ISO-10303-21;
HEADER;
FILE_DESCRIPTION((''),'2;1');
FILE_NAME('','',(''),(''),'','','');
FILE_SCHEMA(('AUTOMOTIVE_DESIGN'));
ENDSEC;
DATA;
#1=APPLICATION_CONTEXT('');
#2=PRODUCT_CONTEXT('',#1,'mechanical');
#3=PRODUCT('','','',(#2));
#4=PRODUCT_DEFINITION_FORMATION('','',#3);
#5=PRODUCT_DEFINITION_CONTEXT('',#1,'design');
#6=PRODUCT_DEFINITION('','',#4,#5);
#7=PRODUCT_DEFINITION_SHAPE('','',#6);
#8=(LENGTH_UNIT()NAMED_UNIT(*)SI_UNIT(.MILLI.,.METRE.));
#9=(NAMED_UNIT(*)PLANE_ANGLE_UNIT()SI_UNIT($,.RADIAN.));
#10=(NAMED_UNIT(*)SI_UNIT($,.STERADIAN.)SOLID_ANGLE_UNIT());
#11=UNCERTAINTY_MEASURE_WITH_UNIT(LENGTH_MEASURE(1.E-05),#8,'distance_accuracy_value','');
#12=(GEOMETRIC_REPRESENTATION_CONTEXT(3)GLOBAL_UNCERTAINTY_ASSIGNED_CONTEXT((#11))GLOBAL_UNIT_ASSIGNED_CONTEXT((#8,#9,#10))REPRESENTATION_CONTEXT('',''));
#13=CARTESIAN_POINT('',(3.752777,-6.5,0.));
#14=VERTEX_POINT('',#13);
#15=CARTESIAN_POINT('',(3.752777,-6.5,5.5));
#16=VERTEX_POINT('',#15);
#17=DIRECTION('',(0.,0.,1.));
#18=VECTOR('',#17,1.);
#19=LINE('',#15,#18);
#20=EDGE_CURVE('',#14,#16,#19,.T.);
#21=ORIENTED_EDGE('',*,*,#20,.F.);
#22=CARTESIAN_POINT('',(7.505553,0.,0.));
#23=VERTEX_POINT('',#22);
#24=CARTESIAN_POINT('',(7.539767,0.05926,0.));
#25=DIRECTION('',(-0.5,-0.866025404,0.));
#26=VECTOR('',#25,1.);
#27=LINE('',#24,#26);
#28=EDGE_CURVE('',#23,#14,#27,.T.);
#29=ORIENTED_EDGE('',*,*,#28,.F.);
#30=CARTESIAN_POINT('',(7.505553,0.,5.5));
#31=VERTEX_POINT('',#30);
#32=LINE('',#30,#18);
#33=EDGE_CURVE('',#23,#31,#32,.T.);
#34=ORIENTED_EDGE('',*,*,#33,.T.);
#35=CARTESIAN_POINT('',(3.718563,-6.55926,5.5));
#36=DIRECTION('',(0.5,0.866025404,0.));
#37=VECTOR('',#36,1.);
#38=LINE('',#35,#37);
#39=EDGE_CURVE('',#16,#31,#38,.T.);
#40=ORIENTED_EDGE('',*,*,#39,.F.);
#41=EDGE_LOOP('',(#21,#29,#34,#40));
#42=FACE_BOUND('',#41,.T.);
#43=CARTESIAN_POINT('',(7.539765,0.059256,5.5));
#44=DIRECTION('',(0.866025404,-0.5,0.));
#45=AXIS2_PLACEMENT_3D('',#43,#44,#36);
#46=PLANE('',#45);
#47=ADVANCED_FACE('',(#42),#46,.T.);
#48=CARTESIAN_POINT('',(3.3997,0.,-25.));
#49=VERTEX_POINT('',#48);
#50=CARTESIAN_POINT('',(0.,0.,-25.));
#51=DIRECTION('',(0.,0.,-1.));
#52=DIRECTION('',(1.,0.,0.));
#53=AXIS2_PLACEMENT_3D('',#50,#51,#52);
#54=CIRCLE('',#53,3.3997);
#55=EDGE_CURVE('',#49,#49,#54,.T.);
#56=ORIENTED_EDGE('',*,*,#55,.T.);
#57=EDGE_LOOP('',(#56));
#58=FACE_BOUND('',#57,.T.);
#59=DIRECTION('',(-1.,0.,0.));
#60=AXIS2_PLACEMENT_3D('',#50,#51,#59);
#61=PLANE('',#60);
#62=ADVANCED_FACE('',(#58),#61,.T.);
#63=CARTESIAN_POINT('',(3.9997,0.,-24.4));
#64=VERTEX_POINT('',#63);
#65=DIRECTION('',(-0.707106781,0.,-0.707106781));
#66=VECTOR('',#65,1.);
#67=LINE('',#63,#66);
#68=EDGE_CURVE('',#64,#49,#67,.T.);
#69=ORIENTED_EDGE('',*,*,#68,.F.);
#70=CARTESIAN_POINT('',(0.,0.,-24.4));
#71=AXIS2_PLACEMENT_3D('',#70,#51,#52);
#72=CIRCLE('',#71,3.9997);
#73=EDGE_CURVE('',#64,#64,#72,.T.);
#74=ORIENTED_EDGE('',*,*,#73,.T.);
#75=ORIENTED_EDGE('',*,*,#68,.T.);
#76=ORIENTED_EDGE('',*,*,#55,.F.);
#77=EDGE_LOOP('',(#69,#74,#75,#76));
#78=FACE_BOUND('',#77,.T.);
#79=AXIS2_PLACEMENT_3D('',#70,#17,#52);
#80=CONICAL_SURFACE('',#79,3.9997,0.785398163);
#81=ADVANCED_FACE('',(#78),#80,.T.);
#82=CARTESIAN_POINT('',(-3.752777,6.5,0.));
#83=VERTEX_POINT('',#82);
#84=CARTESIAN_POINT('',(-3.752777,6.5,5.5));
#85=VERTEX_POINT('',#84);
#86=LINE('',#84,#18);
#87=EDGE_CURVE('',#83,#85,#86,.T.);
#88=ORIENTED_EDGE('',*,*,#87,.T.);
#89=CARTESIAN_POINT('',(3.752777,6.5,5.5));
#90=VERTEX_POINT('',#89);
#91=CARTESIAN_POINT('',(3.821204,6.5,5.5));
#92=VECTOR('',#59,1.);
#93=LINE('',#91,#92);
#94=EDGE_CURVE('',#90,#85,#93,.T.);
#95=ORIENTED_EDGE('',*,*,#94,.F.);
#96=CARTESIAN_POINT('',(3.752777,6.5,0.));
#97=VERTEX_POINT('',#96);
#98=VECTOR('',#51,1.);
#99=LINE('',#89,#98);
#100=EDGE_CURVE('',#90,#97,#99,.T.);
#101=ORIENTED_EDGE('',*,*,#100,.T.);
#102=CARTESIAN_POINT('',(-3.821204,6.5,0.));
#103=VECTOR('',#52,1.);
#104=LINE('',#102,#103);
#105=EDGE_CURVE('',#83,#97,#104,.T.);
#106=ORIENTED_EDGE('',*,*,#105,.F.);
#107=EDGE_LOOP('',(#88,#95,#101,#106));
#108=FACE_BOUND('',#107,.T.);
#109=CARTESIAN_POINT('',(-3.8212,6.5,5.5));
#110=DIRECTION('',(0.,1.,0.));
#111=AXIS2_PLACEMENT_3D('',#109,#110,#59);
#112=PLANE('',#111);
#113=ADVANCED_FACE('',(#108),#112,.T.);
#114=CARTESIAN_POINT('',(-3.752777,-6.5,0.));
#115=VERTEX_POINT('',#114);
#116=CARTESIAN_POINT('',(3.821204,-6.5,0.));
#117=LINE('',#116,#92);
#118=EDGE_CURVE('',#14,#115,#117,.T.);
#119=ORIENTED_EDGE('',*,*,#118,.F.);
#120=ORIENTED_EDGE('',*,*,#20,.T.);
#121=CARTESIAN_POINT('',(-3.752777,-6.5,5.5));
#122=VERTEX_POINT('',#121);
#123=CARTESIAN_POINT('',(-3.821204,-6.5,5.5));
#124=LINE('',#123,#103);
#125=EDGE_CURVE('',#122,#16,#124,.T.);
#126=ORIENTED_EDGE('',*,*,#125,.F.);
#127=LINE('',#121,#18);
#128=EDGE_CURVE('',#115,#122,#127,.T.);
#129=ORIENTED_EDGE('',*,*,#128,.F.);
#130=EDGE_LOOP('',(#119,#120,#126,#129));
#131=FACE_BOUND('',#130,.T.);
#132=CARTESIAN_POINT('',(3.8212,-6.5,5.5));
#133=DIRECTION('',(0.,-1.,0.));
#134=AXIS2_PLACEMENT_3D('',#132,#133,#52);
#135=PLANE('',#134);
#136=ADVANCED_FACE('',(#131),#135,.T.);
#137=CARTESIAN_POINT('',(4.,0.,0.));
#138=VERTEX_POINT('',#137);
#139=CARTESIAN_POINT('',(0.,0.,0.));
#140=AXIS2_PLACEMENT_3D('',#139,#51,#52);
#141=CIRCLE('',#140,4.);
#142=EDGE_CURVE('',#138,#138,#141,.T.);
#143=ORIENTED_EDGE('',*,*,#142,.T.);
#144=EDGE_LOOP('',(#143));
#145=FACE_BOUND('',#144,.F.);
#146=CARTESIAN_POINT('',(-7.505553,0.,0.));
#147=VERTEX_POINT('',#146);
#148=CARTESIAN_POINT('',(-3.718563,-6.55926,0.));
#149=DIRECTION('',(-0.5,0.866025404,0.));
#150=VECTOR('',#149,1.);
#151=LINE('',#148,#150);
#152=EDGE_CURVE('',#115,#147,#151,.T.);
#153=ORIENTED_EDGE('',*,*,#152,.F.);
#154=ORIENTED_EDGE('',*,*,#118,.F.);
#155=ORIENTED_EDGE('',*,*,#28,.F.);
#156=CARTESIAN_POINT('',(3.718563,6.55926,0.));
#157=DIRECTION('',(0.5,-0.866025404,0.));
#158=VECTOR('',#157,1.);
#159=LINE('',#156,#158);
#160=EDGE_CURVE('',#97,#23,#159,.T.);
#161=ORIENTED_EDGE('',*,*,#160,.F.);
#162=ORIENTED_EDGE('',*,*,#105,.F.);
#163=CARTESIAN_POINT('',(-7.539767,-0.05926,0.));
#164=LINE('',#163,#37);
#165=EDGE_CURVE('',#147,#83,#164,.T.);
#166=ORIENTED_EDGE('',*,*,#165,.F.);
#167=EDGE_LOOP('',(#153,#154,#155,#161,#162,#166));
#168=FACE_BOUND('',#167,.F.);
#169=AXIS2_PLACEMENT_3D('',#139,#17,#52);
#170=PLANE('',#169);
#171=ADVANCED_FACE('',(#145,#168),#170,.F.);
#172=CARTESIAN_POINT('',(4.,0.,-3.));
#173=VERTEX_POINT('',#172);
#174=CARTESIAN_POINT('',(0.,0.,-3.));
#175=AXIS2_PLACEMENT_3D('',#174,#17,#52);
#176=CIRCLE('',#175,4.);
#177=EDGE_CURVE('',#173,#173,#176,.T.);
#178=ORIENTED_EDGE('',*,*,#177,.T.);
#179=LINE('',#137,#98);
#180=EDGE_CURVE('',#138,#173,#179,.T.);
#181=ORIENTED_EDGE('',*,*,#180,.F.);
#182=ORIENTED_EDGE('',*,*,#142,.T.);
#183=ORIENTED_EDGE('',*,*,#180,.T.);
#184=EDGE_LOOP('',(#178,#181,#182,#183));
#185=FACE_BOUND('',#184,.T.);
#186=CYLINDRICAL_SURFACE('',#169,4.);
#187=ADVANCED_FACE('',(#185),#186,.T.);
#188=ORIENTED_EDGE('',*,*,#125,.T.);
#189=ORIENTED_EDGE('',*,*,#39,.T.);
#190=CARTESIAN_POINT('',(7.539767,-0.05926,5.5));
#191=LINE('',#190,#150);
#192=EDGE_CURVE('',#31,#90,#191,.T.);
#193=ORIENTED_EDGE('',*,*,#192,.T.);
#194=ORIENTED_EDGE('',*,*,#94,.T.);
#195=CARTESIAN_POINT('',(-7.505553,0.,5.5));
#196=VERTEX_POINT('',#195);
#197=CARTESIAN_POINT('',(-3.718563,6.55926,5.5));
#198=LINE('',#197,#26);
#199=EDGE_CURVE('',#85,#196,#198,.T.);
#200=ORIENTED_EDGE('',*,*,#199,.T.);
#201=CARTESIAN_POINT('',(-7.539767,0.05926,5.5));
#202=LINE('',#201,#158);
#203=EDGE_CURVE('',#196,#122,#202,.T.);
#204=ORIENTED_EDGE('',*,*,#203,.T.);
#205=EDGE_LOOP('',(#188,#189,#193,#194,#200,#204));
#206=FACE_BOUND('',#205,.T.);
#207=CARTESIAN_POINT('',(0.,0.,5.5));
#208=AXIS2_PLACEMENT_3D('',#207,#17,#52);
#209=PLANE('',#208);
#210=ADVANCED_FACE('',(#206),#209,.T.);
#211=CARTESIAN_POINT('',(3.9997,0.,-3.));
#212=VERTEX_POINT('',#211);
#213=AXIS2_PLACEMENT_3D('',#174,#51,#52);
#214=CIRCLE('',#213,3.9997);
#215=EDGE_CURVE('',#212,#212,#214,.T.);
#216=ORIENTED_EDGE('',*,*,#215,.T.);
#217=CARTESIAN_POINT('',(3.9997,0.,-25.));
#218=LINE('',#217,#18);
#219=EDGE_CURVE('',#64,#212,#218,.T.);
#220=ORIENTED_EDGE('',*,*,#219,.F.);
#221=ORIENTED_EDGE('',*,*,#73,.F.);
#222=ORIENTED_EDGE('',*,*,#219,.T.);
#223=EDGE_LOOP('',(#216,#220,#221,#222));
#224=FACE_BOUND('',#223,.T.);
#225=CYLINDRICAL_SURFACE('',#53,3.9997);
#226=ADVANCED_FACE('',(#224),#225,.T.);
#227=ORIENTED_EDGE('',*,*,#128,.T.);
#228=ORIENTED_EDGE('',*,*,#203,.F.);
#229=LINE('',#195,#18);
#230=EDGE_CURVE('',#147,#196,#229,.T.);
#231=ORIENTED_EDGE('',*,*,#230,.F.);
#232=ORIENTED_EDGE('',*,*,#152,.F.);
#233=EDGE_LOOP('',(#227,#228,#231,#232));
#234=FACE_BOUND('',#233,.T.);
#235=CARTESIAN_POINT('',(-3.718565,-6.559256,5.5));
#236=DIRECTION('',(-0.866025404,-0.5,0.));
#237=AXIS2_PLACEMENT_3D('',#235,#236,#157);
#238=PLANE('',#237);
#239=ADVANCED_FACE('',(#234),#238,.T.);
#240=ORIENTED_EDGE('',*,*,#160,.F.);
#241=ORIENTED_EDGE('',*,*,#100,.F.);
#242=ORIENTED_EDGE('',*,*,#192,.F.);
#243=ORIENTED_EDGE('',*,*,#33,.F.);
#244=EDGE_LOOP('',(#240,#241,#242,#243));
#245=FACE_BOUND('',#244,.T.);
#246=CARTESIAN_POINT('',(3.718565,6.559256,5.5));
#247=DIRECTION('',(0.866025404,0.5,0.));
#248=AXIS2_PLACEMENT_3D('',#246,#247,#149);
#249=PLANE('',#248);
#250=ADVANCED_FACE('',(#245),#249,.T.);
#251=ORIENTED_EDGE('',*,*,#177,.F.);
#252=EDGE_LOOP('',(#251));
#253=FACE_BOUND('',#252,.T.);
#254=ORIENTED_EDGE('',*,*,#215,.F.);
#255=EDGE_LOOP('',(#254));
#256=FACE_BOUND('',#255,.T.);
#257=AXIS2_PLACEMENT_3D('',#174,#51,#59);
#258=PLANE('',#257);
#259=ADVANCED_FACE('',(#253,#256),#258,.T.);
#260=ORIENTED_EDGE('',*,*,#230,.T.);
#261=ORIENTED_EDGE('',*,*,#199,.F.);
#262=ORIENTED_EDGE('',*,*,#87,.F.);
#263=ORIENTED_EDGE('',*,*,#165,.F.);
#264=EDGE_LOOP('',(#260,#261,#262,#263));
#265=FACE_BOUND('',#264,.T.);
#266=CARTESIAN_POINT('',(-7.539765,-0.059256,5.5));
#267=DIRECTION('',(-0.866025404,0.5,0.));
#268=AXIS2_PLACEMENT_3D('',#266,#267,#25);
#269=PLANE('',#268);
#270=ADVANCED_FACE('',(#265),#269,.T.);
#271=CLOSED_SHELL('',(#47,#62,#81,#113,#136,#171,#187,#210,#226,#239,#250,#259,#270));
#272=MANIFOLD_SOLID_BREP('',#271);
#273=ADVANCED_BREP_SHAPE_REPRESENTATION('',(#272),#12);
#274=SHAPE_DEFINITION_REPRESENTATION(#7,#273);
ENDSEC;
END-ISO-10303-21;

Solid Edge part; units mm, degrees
sketch "Sketch1" plane through (0, 0, 0) normal (0, 0, 1) x (1, 0, 0)
  circle A0 centre (0, 0) radius 7.54
  dimension "D1" = 15.08
extrude "Protrusion1" add sketch "Sketch1" along normal blind 5.5
sketch "Sketch2" plane through (0, 0, 0) normal (0, 0, -1) x (1, 0, 0)
  circle A0 centre (0, 0) radius 4
extrude "Protrusion2" add sketch "Sketch2" along normal blind 25
sketch "Sketch3" plane through (0, 0, -25) normal (0, 0, -1) x (1, 0, 0)
  circle A0 centre (0, 0) radius 3.9997
extrude "Cutout1" cut sketch "Sketch3" against normal blind 22 flip side to cut
chamfer "Chamfer_1" distance 0.6 angle 45 1 edges at (-3.9997, 0, -25)
sketch "Sketch4" plane through (0, 0, 5.5) normal (0, 0, 1) x (1, 0, 0)
  line L0 (-3.8212, 6.5) -> (3.8212, 6.5)
  dimension "D1" = 13
extrude "Cutout2" cut sketch "Sketch4" against normal up to next material side at (0, 6.55, 5.5)
pattern_circular "Pattern1" count 6 over 360 about axis through (0, 0, 5.5) along (0, 0, 1) of "Cutout2"
properties part number "24101200"
